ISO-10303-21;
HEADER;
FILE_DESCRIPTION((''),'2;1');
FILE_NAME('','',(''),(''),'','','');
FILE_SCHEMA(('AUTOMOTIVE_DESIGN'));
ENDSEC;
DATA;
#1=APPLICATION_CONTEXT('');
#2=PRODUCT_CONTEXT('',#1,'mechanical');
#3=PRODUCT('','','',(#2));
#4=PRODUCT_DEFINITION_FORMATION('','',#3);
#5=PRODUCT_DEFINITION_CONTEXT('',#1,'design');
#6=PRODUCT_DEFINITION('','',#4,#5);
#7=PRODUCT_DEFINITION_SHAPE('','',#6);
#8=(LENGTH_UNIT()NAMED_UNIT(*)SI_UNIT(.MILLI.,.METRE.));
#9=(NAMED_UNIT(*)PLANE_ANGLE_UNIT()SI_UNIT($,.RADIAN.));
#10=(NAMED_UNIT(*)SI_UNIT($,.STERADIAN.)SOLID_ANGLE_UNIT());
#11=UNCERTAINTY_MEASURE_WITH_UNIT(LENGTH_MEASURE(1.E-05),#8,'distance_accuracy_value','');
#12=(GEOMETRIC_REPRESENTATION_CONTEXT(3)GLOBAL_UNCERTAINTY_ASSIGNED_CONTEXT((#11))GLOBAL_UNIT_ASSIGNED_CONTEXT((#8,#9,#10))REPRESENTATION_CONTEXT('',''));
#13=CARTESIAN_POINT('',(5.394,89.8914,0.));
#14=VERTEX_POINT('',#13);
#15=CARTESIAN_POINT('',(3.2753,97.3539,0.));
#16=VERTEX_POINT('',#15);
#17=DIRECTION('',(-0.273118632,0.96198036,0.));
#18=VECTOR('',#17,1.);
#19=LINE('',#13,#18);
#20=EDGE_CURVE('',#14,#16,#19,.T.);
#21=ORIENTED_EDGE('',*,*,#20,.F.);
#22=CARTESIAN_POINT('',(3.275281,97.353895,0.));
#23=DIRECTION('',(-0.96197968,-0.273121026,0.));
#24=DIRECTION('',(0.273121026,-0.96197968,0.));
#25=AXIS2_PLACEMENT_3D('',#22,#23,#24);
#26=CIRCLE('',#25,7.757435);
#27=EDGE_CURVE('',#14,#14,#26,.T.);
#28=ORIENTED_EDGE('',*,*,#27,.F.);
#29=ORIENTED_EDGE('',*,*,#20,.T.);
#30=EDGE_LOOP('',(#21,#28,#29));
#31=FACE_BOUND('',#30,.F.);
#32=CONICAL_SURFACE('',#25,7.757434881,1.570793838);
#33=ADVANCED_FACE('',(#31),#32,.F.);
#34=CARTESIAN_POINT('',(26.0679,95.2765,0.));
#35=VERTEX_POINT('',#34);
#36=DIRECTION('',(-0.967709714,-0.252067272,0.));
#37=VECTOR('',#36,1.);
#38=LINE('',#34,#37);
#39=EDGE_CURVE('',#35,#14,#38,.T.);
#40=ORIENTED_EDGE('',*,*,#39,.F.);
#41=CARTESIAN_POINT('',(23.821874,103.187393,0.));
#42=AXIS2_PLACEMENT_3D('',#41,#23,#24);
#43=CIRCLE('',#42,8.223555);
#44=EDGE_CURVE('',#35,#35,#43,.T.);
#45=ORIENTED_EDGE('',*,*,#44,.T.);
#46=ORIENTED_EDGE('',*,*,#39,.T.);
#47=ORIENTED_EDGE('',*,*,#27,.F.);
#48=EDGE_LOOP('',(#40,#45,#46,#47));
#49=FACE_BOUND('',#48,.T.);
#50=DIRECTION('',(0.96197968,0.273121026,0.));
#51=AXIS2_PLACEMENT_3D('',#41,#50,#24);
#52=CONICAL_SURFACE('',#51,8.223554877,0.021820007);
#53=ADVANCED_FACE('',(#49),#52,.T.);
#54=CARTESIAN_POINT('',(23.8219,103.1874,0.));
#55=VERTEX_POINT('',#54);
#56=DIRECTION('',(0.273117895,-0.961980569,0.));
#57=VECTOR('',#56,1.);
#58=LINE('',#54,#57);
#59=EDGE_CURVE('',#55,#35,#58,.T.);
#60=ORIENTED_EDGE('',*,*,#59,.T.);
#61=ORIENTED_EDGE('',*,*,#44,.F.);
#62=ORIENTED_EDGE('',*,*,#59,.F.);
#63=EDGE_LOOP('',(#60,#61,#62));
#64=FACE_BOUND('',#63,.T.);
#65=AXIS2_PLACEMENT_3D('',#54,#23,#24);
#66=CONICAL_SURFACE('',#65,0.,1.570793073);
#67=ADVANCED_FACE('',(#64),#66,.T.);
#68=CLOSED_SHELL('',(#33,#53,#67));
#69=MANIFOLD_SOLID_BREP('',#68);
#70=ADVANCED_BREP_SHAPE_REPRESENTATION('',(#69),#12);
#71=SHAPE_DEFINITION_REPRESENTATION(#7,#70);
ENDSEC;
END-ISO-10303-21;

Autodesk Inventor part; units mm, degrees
sketch "Sketch_2" plane through (0, 0, 0) normal (0, 0, 1) x (1, 0, 0)
  line L0 (3.2753, 97.3539) -> (23.8219, 103.1874)
  line L1 (23.8219, 103.1874) -> (26.0679, 95.2765)
  line L2 (26.0679, 95.2765) -> (5.394, 89.8914)
  line L3 (5.394, 89.8914) -> (3.2753, 97.3539)
  line L4 (3.2753, 97.3539) -> (23.8219, 103.1874)
revolve "Revolution1" add sketch "Sketch_2" angle 360 about axis through (3.2753, 97.3539, 0) along (-0.96198, -0.2731198, 0)
ref_plane "roller_XY" through (0, 100.0165, 0) normal (-1, 0, 0) x (0, 0, -1)
ref_plane "roller_YZ" through (0, 100.0165, 0) normal (0, 0, -1) x (0, -1, 0)
ref_plane "roller_ZX" through (0, 100.0165, 0) normal (0, -1, 0) x (-1, 0, 0)
properties part number "T4DB 170_r"
